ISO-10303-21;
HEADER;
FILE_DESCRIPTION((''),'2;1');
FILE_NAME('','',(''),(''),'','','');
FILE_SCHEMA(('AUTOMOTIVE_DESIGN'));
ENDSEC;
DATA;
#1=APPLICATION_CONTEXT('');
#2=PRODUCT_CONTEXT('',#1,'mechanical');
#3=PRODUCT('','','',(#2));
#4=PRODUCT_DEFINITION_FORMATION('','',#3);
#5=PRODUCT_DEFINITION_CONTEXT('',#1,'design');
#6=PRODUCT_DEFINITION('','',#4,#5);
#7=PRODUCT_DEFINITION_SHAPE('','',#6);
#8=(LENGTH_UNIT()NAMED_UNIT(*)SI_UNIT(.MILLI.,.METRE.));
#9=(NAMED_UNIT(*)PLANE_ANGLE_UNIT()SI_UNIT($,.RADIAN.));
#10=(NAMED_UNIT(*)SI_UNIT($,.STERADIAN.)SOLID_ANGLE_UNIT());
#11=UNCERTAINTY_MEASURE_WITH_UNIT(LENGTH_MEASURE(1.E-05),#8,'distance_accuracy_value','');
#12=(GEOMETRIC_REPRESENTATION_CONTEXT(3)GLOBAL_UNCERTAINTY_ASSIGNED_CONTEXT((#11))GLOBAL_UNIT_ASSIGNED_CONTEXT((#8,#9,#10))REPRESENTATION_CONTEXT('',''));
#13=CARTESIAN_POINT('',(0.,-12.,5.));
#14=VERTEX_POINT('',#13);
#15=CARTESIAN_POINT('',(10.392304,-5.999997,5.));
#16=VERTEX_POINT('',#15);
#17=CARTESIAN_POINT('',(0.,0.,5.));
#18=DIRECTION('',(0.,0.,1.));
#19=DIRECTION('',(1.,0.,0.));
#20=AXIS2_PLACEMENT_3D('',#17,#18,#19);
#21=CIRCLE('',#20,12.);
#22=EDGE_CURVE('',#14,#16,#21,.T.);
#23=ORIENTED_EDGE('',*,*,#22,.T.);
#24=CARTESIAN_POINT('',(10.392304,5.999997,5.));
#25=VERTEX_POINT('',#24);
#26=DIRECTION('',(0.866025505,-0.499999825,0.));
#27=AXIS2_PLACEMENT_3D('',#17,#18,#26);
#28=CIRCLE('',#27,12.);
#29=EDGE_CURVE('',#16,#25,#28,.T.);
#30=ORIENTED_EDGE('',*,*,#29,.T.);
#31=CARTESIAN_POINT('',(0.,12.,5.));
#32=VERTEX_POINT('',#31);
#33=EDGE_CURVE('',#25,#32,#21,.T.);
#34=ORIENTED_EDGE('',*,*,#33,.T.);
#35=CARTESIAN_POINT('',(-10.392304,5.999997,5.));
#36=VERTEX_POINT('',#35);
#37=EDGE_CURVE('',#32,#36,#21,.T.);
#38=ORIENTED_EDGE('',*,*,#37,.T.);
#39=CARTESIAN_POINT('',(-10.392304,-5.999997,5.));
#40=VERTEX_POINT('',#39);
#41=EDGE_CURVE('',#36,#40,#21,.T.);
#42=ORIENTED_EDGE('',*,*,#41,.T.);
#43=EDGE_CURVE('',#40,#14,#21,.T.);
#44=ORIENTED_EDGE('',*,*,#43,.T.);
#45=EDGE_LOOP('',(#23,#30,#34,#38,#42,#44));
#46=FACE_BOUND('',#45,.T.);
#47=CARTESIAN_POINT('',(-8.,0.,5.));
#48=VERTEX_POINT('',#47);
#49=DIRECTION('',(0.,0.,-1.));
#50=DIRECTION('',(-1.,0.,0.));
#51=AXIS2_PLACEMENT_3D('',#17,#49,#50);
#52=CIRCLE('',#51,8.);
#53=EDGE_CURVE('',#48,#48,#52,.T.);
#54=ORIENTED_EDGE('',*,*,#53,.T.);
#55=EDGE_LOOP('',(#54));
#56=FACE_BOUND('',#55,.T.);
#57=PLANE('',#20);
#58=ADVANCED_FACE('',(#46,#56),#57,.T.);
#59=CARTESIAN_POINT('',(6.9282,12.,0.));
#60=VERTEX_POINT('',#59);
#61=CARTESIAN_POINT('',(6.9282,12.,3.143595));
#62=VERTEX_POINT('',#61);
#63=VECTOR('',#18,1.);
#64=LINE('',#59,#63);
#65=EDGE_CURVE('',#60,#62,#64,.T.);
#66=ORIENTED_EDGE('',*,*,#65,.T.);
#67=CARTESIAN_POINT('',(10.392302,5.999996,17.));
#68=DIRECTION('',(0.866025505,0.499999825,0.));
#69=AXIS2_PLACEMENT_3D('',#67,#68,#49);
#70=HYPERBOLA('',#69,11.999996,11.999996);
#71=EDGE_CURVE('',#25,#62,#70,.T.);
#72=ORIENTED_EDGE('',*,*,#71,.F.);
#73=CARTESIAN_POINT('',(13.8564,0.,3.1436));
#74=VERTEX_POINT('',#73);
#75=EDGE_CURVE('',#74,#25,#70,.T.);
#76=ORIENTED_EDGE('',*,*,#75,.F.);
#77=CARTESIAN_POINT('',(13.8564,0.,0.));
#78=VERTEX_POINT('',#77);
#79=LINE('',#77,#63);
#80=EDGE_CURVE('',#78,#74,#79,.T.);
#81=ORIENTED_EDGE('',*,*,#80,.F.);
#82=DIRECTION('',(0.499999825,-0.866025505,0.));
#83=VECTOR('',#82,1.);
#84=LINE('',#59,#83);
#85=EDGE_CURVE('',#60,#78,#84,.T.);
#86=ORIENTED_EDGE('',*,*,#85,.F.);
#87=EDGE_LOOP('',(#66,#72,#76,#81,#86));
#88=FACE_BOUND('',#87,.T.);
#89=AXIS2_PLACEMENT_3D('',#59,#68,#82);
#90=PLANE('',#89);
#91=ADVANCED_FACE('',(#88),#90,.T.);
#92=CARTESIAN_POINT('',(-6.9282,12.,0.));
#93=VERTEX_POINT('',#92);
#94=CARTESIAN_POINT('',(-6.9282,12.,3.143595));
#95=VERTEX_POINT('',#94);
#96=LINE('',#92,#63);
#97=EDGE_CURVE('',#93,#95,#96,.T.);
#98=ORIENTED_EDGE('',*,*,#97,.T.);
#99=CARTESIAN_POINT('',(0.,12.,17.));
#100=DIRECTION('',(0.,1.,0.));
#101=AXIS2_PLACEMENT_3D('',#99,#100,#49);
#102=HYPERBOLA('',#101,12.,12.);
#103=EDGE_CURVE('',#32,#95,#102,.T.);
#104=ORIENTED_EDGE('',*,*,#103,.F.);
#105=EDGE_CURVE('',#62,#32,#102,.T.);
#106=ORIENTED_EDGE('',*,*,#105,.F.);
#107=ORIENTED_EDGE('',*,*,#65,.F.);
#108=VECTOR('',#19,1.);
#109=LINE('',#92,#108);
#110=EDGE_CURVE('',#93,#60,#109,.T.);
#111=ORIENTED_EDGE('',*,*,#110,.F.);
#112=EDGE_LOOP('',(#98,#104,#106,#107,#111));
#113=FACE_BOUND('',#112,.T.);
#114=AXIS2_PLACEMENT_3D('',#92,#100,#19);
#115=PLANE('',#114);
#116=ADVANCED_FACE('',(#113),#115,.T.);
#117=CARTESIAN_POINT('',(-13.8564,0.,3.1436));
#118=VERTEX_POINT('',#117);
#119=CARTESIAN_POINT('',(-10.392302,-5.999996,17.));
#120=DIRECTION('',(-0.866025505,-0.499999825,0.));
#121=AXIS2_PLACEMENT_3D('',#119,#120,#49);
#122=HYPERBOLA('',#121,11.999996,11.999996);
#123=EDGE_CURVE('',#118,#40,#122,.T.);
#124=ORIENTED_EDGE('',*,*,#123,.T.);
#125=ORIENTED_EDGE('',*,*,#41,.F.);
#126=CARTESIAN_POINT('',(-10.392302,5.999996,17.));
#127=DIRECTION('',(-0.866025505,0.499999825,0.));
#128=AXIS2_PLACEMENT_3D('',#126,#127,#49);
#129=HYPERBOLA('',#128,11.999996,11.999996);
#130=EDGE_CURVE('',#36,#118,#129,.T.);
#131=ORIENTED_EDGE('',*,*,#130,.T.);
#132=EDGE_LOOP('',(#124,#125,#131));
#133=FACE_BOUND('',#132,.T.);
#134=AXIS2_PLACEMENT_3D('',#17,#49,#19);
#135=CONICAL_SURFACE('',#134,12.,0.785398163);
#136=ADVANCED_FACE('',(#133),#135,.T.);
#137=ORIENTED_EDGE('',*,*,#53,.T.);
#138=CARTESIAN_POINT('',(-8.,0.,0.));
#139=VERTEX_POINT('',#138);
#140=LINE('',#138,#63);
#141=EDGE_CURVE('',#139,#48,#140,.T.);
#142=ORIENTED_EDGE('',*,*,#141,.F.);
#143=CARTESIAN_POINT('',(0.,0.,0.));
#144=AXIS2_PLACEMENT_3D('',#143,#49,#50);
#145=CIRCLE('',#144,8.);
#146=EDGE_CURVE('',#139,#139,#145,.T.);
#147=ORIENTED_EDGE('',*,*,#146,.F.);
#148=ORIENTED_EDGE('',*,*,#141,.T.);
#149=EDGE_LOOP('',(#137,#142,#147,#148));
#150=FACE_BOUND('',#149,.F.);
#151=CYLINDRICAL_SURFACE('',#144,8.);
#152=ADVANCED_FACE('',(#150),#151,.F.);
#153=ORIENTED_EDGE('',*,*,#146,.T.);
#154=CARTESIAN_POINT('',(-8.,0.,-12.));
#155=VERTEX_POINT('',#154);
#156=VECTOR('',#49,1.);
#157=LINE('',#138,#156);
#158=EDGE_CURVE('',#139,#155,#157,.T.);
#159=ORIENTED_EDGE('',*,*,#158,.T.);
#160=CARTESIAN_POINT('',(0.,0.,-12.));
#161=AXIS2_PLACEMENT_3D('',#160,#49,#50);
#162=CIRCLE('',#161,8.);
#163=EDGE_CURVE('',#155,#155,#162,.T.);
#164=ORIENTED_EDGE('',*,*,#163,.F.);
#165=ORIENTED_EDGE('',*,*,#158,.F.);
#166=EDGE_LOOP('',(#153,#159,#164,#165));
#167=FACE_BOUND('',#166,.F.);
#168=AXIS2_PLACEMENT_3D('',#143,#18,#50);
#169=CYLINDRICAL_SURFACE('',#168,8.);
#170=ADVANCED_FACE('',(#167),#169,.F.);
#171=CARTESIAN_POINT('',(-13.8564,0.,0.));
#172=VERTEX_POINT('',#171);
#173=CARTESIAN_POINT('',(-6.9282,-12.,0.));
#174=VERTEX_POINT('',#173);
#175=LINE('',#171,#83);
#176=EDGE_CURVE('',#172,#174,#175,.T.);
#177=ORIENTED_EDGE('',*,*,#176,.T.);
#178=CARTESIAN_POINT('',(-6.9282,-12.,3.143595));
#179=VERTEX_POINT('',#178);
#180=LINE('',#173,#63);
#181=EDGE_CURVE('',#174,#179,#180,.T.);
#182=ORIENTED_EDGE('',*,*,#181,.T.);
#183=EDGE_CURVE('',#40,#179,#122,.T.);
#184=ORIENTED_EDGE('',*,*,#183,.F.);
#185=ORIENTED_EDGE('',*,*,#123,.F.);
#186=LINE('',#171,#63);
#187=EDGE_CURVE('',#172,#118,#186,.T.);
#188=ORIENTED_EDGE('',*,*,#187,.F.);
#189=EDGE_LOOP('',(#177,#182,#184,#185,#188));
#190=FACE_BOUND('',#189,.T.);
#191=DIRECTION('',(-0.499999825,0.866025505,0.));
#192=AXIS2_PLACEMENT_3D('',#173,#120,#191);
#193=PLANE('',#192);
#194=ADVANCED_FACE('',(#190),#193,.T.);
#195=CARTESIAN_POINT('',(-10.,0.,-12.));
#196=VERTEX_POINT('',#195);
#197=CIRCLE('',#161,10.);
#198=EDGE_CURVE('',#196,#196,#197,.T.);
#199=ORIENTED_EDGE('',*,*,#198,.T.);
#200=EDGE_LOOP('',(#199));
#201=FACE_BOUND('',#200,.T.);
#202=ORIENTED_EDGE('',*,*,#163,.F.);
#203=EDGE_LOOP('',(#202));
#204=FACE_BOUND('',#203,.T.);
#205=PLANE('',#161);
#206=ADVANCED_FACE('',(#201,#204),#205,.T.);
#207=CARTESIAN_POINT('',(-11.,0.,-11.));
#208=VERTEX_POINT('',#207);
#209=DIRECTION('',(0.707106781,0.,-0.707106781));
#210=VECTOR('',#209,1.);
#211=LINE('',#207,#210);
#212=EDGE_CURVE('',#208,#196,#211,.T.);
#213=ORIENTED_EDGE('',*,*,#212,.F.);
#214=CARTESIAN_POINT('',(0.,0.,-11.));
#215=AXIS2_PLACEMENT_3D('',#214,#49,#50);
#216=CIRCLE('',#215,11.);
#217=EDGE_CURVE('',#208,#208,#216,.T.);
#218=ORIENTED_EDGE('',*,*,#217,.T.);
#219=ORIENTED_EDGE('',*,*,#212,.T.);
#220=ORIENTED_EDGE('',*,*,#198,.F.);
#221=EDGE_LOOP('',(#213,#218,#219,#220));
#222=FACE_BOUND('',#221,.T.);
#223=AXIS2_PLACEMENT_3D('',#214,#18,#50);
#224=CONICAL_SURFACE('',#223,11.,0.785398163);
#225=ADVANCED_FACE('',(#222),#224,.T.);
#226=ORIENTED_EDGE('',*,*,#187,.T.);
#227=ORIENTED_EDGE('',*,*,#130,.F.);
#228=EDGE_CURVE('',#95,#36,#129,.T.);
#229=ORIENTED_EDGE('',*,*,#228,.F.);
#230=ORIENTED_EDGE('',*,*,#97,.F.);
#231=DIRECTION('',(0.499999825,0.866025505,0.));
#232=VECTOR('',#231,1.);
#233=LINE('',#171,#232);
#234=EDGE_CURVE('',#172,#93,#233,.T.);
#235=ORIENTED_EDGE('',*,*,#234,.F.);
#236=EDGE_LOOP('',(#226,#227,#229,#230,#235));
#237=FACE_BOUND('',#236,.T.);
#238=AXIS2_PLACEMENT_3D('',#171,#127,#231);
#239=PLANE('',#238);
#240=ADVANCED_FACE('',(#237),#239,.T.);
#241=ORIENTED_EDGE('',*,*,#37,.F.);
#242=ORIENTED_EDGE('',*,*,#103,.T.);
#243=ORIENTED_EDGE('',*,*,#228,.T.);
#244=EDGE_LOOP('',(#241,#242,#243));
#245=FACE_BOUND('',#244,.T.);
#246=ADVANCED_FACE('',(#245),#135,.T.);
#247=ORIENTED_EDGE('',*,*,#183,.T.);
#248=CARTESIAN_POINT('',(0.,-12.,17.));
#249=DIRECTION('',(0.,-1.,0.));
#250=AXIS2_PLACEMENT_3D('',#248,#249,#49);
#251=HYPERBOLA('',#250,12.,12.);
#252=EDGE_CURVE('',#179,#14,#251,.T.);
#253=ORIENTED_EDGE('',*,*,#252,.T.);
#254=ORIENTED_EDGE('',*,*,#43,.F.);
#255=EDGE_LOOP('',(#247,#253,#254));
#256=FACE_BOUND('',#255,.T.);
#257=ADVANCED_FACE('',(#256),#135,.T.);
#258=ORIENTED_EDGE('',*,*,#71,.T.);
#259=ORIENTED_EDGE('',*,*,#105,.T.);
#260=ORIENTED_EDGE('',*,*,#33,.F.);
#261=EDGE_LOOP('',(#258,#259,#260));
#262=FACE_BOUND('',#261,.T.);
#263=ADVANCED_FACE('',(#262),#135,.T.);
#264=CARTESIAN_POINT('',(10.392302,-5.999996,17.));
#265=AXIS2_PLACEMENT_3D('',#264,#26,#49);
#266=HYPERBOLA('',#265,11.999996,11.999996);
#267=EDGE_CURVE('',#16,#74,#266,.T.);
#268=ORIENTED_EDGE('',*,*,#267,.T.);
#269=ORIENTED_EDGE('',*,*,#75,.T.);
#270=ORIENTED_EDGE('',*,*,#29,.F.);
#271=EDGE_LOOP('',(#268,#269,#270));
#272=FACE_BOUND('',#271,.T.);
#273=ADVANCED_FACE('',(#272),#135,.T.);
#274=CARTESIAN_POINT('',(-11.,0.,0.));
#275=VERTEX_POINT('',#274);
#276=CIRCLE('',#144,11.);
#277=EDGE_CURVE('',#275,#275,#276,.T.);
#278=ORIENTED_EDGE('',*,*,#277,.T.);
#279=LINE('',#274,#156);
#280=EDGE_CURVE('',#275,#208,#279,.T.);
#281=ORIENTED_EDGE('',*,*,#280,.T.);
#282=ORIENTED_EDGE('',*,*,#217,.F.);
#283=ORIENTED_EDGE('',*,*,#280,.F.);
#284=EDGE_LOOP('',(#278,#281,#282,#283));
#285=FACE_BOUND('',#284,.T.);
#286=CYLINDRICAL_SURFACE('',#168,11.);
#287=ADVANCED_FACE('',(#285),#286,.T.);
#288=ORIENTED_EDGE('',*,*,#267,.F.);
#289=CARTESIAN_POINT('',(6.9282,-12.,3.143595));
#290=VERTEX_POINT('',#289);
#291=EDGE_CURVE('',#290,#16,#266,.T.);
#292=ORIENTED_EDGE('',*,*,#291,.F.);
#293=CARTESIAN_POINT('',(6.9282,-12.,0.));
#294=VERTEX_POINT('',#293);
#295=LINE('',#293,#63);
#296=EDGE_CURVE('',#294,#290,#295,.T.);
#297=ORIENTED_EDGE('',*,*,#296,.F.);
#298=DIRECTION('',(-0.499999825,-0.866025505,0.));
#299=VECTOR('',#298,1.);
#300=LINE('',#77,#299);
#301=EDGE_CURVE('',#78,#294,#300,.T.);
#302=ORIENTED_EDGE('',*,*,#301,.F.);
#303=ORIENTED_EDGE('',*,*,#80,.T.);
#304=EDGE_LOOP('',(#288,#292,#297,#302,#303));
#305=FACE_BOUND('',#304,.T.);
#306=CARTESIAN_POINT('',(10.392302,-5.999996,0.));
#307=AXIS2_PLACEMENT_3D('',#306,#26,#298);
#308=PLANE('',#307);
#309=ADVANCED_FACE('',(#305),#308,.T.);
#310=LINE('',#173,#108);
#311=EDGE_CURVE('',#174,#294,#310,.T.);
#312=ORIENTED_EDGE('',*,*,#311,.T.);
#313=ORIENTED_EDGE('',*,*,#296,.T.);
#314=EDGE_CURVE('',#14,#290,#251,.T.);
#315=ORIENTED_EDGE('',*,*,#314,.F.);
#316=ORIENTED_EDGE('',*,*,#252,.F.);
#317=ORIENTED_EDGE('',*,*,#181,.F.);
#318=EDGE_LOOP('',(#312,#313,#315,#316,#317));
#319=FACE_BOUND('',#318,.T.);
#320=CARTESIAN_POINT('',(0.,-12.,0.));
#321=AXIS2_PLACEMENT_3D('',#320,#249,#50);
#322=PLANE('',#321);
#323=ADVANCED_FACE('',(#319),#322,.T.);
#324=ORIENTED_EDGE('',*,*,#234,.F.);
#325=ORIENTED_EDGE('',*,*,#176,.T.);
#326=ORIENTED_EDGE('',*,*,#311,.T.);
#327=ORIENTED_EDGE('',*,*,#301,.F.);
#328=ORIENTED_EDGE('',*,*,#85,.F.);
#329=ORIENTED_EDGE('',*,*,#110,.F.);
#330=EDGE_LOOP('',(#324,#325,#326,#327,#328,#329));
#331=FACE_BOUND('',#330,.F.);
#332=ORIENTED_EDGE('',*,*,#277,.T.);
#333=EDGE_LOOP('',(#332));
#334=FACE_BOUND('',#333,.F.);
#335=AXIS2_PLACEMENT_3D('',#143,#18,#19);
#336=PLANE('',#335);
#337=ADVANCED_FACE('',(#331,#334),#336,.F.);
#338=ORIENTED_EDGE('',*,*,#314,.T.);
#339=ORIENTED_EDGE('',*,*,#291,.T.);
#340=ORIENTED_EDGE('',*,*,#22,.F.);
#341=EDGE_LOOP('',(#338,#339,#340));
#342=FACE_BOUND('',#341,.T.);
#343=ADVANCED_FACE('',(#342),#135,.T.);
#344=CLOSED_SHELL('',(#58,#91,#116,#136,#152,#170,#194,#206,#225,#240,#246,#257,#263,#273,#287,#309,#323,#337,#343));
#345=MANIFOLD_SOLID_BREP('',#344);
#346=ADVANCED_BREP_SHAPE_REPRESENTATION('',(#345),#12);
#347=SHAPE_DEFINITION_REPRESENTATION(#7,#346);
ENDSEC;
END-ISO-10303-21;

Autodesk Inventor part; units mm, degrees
ref_plane "YZ Plane" through (0, 0, 0) normal (1, 0, 0) x (0, 1, 0)
ref_plane "XZ Plane" through (0, 0, 0) normal (0, 1, 0) x (-1, 0, 0)
ref_plane "XY Plane" through (0, 0, 0) normal (0, 0, 1) x (1, 0, 0)
sketch "Sketch1" plane through (0, 0, 0) normal (0, 0, 1) x (1, 0, 0)
  line L0 (-6.9282, -12) -> (-13.8564, 0)
  line L1 (-13.8564, 0) -> (-6.9282, 12)
  line L2 (-6.9282, 12) -> (6.9282, 12)
  line L3 (6.9282, 12) -> (13.8564, 0)
  line L4 (13.8564, 0) -> (6.9282, -12)
  line L5 (6.9282, -12) -> (-6.9282, -12)
  circle A0 centre (0, 0) radius 12
  circle A1 centre (0, 0) radius 7
  dimension "d0" = 24
  dimension "d1" = 24
  dimension "d2" = 14
extrude "Extrusion1" add sketch "Sketch1" along normal blind 5 contours L0 A0 L5 | L0 L1 A0 | A0 | A0 L4 L5 | L1 L2 A0 | A0 L3 L4 | L2 L3 A0 | A1
sketch "Sketch2" plane through (0, 0, 5) normal (0, 0, 1) x (1, 0, 0)
  circle A0 centre (0, 0) radius 12
  dimension "d5" = 24
extrude "Extrusion2" cut sketch "Sketch2" against normal blind 5 draft 45 keep common part
sketch "Sketch3" plane through (0, 0, 0) normal (0, 0, -1) x (-1, 0, 0)
  circle A0 centre (0, 0) radius 11
  circle A1 centre (0, 0) radius 8
  dimension "d8" = 22
  dimension "d9" = 16
extrude "Extrusion3" add sketch "Sketch3" along normal blind 12
extrude "Extrusion4" cut sketch "Sketch3" against normal through all contours A1
thread "Thread1" size "M22x1.5" class "6g" standard "ISO Metric profile" full length
chamfer "Chamfer1" distance 1 angle 45 1 edges at (11, 0, -12)
equation "\"BendRadius\" = Thickness"
equation "\"BendReliefWidth\" = Thickness"
equation "\"BendReliefDepth\" = 0.5 * Thickness"
equation "\"CornerReliefSize\" = 4 * Thickness"
equation "\"MinimumRemnant\" = 2 * Thickness"
equation "\"TransitionRadius\" = BendRadius"
equation "\"JacobiRadiusSize\" = BendRadius"
equation "\"GapSize\" = Thickness"
equation "\"Thickness\" = 0.5"
properties part number "Hex.nut"
